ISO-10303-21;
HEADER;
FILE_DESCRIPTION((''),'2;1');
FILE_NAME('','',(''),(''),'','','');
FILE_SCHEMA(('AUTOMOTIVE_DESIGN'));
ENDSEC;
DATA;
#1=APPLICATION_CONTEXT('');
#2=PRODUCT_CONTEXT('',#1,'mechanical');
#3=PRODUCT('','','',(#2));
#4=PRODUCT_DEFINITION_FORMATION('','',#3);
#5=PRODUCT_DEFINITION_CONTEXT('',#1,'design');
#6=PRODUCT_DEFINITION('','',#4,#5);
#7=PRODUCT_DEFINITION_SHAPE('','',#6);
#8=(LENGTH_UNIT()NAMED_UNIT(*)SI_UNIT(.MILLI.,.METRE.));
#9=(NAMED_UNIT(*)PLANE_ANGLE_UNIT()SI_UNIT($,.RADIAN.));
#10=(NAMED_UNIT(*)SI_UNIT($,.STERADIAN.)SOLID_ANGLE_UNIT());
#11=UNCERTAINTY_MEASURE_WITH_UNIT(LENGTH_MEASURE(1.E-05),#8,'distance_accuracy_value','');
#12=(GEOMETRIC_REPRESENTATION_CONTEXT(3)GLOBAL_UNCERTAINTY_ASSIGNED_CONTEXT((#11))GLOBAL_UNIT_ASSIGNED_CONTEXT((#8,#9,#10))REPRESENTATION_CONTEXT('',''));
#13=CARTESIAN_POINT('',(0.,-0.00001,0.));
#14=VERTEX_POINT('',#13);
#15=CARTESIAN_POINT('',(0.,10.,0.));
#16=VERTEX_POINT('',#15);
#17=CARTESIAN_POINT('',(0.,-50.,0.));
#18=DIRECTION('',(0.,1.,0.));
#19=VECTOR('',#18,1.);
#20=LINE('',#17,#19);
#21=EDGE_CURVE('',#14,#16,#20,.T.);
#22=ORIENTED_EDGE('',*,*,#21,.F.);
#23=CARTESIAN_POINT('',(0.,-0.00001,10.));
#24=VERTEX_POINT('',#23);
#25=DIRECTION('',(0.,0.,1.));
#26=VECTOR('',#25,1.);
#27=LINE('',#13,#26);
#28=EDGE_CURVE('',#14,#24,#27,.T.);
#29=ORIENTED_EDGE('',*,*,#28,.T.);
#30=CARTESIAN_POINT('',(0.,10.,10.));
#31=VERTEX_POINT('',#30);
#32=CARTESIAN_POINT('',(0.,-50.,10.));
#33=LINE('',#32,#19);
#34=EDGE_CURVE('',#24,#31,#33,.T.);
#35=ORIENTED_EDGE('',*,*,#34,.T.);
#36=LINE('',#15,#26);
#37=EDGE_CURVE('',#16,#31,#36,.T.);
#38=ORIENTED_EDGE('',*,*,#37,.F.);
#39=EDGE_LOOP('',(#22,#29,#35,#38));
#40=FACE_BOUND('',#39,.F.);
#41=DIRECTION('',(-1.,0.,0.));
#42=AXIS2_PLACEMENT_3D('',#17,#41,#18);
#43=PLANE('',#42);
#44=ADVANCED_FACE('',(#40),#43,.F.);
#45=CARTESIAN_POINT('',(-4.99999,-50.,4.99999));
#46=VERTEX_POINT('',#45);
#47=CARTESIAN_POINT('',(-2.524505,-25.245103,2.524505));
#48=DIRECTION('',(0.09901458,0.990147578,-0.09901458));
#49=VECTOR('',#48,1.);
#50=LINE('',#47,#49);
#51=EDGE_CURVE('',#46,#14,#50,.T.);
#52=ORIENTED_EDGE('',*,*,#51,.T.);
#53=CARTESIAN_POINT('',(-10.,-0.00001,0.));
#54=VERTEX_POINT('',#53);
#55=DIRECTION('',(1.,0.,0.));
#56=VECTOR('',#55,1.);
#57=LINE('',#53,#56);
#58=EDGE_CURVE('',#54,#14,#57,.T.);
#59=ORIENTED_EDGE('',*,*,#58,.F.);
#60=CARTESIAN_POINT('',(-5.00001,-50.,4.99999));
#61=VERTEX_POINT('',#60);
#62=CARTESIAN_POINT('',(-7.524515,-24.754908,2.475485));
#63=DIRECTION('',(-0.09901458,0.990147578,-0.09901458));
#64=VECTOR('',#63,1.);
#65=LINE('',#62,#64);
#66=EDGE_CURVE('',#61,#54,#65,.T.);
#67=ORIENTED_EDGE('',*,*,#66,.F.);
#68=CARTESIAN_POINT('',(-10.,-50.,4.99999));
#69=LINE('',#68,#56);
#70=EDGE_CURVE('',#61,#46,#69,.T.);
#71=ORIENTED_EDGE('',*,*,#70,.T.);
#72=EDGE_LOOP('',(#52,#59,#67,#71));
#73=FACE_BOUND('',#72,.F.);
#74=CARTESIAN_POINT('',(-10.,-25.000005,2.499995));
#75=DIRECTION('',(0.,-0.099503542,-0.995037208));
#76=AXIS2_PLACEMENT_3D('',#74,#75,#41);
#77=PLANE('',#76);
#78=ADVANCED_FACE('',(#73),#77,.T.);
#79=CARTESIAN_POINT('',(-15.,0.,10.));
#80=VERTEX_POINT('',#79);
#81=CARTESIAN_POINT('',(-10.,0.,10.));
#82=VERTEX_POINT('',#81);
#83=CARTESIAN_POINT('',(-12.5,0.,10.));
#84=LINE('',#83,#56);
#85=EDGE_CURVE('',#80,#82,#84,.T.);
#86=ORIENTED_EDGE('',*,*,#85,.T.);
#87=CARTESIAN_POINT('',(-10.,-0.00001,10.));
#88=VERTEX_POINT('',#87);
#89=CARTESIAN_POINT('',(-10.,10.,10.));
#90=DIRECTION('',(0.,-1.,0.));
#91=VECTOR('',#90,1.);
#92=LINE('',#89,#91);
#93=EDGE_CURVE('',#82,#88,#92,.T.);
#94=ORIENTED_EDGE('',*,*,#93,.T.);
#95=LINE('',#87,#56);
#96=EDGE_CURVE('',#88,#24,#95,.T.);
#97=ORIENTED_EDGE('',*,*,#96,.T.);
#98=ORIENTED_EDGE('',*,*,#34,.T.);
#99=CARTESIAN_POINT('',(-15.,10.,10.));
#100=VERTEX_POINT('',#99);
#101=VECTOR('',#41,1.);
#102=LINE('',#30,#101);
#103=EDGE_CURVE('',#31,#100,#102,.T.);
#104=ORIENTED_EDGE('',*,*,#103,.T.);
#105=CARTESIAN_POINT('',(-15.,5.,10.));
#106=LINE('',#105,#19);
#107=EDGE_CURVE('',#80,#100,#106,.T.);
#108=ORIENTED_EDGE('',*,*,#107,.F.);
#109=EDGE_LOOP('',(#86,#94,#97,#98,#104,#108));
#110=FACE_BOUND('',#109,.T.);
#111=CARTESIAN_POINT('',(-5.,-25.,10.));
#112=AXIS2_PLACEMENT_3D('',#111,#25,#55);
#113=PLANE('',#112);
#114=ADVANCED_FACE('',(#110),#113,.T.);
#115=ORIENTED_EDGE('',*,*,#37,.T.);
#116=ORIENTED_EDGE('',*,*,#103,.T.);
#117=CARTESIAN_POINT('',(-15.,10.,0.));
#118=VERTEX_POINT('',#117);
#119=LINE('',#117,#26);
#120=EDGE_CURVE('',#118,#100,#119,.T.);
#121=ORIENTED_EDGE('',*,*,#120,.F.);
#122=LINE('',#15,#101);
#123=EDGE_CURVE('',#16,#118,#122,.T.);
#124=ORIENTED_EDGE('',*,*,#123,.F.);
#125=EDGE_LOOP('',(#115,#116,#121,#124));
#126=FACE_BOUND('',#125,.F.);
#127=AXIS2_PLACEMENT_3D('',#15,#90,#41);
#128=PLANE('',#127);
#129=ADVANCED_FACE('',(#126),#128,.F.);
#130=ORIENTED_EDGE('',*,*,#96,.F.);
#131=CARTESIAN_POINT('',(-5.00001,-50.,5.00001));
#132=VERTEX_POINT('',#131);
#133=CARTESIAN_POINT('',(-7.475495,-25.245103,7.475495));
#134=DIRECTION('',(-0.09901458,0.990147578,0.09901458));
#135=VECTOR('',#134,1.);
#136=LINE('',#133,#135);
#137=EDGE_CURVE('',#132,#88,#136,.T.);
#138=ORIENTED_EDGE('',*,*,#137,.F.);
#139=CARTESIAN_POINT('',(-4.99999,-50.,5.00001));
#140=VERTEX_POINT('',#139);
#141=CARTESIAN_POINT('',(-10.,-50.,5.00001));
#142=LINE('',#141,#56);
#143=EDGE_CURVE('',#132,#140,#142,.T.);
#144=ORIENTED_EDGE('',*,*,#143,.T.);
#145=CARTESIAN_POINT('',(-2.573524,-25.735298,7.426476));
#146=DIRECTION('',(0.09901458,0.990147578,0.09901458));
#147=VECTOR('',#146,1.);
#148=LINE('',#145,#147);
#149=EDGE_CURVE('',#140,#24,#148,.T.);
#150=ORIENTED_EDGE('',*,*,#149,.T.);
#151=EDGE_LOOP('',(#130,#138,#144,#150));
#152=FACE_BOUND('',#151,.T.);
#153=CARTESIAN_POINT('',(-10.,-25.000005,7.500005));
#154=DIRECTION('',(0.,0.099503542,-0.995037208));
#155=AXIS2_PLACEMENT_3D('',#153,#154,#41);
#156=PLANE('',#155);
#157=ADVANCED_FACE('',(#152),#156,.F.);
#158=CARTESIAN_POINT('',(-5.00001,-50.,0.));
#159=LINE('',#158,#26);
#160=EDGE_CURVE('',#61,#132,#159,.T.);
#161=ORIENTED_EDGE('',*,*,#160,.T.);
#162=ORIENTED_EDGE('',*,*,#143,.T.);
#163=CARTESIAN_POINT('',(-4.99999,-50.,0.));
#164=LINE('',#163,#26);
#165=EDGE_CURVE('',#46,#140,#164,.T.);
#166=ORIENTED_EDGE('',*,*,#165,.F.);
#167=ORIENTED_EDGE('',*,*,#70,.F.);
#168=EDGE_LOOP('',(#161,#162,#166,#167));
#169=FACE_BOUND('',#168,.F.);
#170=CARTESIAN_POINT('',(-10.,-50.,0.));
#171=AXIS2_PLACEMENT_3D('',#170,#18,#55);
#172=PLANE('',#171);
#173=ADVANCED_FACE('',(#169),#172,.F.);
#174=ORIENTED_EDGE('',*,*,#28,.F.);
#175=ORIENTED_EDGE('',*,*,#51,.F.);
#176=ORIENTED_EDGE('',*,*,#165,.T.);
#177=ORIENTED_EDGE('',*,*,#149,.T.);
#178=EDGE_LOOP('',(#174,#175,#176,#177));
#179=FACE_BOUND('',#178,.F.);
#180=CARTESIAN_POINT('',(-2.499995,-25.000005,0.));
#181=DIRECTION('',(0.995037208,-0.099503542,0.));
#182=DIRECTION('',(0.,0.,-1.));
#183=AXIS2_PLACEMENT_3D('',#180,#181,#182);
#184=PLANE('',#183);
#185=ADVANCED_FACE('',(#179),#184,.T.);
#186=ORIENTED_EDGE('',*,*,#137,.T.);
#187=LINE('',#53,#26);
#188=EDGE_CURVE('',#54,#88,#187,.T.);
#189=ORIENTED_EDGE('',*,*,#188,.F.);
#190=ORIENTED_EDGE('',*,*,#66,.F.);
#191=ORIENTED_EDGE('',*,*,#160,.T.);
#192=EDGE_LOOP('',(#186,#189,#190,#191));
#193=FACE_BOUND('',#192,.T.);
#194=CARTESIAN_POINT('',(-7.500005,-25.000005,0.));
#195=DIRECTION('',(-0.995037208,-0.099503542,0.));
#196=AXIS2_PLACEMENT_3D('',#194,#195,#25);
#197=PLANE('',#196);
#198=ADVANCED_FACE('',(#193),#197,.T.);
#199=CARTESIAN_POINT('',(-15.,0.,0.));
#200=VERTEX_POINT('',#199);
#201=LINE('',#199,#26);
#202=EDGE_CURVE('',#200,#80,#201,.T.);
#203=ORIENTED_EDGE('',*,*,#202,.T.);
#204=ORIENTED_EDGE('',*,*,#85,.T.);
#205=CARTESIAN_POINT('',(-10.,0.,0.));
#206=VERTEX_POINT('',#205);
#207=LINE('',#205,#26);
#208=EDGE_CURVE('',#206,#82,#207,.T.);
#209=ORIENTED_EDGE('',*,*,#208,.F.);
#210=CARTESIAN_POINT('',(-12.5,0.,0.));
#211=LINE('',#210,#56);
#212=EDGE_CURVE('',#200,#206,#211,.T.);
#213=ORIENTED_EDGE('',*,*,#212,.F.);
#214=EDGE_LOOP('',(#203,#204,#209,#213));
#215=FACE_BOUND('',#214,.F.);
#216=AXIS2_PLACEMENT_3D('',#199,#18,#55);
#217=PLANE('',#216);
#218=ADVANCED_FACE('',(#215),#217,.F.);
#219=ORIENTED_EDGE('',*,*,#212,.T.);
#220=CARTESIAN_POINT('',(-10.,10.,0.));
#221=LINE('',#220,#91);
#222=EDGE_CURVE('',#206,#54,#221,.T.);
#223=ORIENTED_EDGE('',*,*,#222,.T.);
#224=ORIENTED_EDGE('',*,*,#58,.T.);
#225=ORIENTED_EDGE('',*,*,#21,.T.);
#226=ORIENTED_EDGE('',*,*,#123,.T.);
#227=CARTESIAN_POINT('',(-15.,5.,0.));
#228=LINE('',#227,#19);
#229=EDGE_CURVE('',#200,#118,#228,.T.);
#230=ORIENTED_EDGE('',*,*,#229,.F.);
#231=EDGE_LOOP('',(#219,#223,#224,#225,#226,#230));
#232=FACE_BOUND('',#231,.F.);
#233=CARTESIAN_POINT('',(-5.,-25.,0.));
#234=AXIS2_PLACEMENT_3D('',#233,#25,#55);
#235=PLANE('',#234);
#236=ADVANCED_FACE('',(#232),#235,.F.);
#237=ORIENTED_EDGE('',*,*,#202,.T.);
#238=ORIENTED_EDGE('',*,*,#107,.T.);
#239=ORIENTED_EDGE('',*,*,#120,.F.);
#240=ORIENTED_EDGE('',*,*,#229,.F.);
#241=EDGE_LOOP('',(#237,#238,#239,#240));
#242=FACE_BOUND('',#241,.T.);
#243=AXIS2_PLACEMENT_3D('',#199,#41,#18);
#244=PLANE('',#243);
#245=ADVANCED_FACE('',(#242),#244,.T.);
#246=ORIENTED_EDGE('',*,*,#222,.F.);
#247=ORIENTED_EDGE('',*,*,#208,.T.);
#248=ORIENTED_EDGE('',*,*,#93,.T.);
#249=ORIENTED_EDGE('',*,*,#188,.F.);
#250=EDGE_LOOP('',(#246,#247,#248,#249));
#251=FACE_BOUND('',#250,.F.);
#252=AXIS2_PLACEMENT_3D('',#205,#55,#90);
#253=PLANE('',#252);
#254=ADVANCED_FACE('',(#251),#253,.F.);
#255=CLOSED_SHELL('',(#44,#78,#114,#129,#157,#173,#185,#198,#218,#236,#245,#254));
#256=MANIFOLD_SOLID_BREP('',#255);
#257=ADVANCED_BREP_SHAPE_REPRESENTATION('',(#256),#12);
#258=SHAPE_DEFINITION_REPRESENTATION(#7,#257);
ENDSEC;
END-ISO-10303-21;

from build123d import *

# Parameters (mm, degrees)
F0_W     = 10
F0_H     = 50
F0_H_2   = 10
F0_W_2   = 5
F1_DEPTH = 10
F2_SIZE2 = 49.99999
F2_SIZE  = 4.99999


# Not quite as in the source:
# - a fillet or chamfer is up to 0.001 mm smaller than in the source, because OpenCascade refuses the exact size


with BuildPart() as f1:
    # F0 (on Top) → F1 (new body)
    with BuildSketch(Plane.XY):
        with Locations((-5, -25)):
            Rectangle(F0_W, F0_H)
        with Locations((-5, 5)):
            Rectangle(F0_W, F0_H_2)
        with Locations((-12.5, 5)):
            Rectangle(F0_W_2, F0_H_2)
    extrude(amount=F1_DEPTH)

    # F2 (size 5 and 50 in the source; OpenCascade refuses exactly that, so slightly less here)
    f2_edges = [f1.edges().sort_by_distance(p)[0] for p in [
        (-5, -50, 10),
        (-10, -50, 5),
        (-5, -50, 0),
        (0, -50, 5),
    ]]
    f2_side = f1.faces().sort_by_distance((-5, -50, 5))[0]
    chamfer(f2_edges, length=F2_SIZE, length2=F2_SIZE2, reference=f2_side)


solid = f1.part
